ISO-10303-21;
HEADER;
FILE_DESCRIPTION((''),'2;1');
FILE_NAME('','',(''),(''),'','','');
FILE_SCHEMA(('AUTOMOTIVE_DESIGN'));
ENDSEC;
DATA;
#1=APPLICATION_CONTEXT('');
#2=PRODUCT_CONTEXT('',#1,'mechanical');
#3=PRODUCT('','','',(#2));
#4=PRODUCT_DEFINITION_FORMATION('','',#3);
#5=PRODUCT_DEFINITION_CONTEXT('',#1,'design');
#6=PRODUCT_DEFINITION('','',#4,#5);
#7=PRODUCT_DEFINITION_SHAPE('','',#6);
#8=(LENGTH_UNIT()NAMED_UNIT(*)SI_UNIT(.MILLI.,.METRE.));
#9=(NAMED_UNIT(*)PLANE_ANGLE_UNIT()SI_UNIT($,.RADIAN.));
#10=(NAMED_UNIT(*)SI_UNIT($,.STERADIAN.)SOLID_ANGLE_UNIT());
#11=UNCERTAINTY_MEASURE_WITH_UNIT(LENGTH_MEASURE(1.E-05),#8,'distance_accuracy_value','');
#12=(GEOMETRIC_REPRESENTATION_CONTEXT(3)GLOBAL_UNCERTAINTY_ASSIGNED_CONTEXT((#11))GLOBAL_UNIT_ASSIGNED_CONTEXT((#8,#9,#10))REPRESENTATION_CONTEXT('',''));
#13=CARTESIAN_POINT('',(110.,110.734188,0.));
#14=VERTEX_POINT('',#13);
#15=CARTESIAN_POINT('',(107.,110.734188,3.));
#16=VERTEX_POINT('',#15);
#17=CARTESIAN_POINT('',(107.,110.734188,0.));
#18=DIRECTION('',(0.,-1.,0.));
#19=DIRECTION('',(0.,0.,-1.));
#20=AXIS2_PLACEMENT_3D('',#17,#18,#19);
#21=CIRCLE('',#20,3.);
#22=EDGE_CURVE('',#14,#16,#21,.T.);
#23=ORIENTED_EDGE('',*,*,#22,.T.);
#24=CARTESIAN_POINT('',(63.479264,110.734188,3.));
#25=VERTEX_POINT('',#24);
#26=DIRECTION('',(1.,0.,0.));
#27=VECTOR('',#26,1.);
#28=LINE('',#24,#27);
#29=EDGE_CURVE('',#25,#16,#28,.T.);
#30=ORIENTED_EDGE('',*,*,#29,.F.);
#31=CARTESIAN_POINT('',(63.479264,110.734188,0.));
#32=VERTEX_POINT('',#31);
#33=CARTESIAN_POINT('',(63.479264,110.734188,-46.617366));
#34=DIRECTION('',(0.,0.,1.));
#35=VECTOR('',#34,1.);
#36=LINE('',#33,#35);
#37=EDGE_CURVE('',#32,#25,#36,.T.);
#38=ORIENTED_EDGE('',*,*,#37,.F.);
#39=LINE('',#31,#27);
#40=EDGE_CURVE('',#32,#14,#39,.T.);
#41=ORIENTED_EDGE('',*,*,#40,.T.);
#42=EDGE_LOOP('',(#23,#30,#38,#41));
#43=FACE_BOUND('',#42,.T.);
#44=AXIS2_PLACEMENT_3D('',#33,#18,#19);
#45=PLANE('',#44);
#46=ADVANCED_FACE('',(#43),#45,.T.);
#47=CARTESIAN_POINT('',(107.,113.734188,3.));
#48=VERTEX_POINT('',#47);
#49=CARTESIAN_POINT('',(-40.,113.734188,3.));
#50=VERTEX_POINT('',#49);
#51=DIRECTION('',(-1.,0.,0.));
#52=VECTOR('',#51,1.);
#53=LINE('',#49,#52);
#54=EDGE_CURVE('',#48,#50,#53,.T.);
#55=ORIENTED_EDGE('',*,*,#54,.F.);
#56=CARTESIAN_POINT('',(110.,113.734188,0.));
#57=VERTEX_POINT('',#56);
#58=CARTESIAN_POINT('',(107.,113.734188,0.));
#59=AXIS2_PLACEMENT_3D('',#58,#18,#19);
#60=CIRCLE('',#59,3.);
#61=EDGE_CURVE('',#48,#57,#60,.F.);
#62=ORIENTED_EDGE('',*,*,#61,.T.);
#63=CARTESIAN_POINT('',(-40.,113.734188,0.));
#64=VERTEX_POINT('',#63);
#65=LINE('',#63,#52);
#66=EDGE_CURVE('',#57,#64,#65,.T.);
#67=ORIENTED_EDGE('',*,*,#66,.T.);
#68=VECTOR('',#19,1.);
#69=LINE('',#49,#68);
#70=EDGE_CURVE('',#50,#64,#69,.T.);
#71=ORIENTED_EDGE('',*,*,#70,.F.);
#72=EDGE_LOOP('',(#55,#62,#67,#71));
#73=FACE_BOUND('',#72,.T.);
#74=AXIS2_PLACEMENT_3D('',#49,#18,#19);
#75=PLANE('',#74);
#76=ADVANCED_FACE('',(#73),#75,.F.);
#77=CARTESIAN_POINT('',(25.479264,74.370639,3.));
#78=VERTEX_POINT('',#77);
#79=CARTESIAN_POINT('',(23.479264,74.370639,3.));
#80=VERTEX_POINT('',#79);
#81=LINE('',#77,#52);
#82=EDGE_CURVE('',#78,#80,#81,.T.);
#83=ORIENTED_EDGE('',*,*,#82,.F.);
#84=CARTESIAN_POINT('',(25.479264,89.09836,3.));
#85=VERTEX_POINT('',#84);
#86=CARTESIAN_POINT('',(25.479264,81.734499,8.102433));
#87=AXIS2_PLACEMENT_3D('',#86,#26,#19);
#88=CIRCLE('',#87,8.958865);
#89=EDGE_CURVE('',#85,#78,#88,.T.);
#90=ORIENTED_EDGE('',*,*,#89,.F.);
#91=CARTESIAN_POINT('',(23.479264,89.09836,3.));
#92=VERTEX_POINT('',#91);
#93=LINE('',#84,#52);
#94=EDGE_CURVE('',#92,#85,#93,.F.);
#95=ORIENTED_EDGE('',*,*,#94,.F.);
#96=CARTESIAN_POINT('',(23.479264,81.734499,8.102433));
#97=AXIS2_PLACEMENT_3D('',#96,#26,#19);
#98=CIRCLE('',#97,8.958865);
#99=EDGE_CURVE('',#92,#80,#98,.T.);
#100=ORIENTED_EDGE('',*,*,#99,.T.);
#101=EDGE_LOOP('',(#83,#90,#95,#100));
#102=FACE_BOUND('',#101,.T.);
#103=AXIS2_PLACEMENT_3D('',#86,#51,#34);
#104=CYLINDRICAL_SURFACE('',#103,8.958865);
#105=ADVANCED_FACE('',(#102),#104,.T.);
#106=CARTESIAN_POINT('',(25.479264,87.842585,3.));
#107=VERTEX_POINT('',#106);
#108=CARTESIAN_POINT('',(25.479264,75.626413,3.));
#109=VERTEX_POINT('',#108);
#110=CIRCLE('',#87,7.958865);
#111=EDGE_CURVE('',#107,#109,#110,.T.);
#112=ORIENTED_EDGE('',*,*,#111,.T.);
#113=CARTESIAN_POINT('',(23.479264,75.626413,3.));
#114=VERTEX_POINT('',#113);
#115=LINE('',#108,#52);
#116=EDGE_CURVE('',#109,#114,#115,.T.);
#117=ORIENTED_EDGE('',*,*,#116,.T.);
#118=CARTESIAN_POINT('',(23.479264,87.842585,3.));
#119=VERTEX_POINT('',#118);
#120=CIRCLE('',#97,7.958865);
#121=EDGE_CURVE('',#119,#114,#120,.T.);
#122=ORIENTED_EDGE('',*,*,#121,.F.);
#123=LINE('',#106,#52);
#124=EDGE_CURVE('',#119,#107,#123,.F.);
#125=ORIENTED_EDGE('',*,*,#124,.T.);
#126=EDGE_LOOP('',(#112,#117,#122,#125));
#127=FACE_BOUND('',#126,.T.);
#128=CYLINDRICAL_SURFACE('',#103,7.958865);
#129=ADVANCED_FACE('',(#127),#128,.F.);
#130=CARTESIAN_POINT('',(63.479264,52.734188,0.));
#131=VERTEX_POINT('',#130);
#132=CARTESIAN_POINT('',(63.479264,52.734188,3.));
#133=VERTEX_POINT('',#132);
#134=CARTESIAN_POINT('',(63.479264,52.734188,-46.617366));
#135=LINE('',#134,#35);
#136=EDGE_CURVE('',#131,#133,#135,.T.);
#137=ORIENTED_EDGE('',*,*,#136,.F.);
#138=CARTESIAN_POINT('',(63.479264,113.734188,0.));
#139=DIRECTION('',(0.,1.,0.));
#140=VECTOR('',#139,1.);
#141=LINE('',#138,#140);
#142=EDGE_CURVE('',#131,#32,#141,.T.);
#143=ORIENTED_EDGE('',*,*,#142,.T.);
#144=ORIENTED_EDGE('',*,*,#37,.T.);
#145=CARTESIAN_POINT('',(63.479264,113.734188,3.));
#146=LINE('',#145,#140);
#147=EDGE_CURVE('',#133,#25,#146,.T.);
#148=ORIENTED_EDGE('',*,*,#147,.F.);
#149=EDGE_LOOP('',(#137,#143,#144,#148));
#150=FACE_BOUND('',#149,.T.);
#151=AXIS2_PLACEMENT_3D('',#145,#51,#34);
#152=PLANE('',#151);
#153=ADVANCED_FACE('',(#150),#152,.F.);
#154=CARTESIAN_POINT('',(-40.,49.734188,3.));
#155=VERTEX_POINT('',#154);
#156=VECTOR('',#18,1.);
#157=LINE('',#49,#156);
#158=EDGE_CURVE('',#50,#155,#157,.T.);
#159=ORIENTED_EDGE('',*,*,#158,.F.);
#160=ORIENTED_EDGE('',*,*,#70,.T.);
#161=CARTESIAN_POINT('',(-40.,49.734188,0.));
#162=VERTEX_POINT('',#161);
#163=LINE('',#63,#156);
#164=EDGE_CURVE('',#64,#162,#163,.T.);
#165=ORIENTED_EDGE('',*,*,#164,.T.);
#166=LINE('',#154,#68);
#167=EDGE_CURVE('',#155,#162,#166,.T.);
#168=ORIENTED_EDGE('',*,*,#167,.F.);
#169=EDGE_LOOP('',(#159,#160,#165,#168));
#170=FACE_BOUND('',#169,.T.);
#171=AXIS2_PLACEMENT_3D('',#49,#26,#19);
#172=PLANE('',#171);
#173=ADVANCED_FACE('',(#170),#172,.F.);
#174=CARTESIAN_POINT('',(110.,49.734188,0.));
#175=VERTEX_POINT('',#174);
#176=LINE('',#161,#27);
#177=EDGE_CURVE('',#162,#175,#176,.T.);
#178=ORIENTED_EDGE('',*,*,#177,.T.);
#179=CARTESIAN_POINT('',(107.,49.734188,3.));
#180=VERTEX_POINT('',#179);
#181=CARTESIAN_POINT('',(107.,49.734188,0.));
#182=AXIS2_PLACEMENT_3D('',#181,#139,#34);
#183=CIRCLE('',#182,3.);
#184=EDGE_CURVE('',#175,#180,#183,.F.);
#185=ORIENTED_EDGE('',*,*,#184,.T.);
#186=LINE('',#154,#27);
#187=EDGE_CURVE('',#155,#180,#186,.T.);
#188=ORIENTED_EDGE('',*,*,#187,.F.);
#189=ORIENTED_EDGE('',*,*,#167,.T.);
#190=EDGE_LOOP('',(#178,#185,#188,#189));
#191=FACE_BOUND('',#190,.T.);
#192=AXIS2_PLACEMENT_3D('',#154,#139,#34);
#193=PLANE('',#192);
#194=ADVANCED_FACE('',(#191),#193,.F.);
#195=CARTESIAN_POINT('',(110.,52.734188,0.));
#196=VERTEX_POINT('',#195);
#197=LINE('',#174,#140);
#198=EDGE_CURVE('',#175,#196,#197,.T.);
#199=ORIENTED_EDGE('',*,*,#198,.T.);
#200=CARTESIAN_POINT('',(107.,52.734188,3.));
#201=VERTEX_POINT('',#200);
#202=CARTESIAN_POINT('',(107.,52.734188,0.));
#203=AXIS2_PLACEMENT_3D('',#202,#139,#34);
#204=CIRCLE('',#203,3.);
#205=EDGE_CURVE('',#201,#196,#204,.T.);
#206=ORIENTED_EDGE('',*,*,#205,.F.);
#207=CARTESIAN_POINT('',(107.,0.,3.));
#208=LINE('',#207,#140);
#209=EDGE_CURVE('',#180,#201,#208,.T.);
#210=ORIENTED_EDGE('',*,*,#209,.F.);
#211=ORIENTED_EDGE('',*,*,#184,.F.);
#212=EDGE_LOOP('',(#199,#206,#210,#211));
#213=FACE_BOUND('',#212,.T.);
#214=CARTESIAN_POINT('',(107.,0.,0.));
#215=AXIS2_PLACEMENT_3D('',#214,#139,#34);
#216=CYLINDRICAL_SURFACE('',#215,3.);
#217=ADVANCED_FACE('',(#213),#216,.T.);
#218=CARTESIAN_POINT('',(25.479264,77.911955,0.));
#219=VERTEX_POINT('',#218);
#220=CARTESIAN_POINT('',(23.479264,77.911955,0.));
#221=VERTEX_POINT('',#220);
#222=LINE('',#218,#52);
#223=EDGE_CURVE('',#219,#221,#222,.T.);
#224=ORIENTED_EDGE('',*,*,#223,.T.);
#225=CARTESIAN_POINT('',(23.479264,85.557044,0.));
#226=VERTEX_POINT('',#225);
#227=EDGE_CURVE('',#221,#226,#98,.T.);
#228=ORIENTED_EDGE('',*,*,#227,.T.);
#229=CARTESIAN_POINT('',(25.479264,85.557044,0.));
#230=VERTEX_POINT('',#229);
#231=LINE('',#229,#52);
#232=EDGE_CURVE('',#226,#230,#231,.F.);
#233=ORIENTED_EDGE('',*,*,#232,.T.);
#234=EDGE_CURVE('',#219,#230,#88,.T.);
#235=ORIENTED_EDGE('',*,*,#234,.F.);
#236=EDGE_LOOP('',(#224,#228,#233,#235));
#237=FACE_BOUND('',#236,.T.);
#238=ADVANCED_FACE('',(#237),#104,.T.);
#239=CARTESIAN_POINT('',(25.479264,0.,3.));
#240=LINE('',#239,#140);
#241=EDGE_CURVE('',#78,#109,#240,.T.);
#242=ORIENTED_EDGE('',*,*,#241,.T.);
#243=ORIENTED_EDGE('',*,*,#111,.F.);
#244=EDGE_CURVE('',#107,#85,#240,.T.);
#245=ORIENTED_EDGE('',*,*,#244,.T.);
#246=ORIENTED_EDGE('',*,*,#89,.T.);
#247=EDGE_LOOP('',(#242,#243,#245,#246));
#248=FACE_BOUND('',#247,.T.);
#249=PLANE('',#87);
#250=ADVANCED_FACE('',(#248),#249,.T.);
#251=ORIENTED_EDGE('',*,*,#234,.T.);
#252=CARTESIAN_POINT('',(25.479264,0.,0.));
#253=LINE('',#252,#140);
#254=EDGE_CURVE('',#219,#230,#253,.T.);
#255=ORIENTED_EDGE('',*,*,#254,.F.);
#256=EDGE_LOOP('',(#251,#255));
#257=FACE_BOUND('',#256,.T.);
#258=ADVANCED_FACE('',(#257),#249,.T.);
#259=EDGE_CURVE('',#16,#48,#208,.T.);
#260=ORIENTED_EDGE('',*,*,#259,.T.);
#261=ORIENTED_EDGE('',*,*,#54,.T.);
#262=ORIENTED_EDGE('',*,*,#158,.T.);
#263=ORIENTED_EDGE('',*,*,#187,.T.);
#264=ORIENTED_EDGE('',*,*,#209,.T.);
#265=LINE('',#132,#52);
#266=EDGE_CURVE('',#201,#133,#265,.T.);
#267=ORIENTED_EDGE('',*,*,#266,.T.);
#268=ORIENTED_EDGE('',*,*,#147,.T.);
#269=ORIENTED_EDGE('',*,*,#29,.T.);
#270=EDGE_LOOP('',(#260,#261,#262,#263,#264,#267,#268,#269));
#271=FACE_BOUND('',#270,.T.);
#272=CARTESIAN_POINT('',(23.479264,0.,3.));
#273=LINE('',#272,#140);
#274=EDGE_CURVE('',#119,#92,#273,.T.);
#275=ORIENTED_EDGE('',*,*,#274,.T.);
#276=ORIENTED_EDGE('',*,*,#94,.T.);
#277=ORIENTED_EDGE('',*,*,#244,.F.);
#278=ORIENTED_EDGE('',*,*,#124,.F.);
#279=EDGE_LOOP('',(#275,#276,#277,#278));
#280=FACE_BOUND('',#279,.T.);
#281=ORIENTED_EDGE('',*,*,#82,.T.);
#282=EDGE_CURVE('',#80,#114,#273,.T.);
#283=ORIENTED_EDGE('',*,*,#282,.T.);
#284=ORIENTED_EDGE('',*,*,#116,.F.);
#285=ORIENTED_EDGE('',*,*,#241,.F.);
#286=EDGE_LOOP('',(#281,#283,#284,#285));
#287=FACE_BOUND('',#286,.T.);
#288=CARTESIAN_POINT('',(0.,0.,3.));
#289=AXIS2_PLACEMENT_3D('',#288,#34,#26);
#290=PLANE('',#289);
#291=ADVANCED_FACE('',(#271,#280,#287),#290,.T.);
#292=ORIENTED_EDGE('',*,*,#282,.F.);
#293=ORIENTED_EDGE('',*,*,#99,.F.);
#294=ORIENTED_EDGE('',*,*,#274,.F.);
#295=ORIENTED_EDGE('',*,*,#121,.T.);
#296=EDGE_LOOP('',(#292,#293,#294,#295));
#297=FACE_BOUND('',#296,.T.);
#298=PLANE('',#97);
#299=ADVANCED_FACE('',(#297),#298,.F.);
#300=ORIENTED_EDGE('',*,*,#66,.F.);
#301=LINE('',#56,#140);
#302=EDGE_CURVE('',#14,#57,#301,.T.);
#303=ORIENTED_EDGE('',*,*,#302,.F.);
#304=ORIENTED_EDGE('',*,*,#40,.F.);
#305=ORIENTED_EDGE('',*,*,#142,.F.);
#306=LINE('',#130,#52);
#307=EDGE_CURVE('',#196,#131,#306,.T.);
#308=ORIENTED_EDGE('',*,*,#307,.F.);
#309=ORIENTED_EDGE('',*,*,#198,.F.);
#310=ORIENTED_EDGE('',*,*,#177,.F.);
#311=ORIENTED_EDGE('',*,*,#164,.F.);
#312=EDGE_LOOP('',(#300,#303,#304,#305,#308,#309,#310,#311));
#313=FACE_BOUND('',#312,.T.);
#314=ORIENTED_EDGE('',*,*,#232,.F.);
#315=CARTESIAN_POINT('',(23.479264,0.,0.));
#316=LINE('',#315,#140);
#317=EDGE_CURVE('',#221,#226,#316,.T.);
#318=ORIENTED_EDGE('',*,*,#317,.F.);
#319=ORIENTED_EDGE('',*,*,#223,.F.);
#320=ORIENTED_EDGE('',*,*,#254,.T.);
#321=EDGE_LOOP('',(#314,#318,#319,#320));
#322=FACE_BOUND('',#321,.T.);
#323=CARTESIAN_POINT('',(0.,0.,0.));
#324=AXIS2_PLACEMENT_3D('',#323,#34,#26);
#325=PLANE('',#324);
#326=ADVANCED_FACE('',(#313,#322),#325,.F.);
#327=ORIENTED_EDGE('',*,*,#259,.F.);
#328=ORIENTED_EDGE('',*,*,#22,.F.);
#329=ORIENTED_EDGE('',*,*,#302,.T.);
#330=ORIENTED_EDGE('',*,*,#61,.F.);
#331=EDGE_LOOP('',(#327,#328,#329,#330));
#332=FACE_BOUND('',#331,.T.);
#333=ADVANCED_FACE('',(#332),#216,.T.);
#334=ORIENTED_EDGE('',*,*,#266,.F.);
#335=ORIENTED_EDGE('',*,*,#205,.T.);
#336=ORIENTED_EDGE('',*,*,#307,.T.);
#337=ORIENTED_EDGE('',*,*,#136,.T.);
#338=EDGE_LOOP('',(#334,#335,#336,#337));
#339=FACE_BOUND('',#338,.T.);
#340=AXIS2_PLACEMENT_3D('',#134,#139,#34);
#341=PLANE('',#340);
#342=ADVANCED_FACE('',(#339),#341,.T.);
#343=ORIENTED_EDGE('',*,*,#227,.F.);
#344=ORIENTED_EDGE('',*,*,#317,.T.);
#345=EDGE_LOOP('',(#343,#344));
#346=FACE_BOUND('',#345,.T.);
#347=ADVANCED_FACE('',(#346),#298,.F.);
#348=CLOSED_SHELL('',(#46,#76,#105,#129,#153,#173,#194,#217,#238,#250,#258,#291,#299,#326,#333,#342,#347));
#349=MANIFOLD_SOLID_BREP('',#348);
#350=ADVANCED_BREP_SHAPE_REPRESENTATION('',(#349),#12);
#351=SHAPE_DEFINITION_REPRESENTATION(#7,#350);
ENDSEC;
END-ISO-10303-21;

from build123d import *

# Parameters (mm, degrees)
SKETCH1_W           = 103.47926424
SKETCH1_H           = 64
BOSS_EXTRUDE1_DEPTH = 3
SKETCH2_W           = 46.52073576
SKETCH2_H           = 3
BOSS_EXTRUDE2_DEPTH = 3
FILLET1_R           = 3
SKETCH3_R           = 8.958865037
SKETCH3_R_2         = 7.958865037
EXTRUDE_THIN1_DEPTH = 2


with BuildPart() as part:
    # Sketch1 → Boss-Extrude1 (new body)
    with BuildSketch(Plane.XY):
        with Locations((11.73963212, 81.73418814)):
            Rectangle(SKETCH1_W, SKETCH1_H)
    extrude(amount=BOSS_EXTRUDE1_DEPTH)

    # Sketch2 → Boss-Extrude2 (add)
    with BuildSketch(Plane.XY.offset(3)):
        with Locations((86.73963212, 112.23418814)):
            Rectangle(SKETCH2_W, SKETCH2_H)
        with Locations((86.73963212, 51.23418814)):
            Rectangle(SKETCH2_W, SKETCH2_H)
    extrude(amount=-BOSS_EXTRUDE2_DEPTH)

    # Fillet1
    fillet1_edges = [part.edges().sort_by_distance(p)[0] for p in [
        (110, 51.23418814, 3),
        (110, 112.23418814, 3),
    ]]
    fillet(fillet1_edges, radius=FILLET1_R - 0.0001)  # a hair under: the kernel refuses the full size

    # Sketch3 → Extrude-Thin1 (add)
    with BuildSketch(Plane(origin=(23.47926424, 0, 0), x_dir=(0, 0, -1), z_dir=(1, 0, 0))):
        with Locations((-8.102432793, 81.734499249)):
            Circle(SKETCH3_R)
        with Locations((-8.102432793, 81.734499249)):
            Circle(SKETCH3_R_2, mode=Mode.SUBTRACT)
    extrude(amount=EXTRUDE_THIN1_DEPTH)


solid = part.part
